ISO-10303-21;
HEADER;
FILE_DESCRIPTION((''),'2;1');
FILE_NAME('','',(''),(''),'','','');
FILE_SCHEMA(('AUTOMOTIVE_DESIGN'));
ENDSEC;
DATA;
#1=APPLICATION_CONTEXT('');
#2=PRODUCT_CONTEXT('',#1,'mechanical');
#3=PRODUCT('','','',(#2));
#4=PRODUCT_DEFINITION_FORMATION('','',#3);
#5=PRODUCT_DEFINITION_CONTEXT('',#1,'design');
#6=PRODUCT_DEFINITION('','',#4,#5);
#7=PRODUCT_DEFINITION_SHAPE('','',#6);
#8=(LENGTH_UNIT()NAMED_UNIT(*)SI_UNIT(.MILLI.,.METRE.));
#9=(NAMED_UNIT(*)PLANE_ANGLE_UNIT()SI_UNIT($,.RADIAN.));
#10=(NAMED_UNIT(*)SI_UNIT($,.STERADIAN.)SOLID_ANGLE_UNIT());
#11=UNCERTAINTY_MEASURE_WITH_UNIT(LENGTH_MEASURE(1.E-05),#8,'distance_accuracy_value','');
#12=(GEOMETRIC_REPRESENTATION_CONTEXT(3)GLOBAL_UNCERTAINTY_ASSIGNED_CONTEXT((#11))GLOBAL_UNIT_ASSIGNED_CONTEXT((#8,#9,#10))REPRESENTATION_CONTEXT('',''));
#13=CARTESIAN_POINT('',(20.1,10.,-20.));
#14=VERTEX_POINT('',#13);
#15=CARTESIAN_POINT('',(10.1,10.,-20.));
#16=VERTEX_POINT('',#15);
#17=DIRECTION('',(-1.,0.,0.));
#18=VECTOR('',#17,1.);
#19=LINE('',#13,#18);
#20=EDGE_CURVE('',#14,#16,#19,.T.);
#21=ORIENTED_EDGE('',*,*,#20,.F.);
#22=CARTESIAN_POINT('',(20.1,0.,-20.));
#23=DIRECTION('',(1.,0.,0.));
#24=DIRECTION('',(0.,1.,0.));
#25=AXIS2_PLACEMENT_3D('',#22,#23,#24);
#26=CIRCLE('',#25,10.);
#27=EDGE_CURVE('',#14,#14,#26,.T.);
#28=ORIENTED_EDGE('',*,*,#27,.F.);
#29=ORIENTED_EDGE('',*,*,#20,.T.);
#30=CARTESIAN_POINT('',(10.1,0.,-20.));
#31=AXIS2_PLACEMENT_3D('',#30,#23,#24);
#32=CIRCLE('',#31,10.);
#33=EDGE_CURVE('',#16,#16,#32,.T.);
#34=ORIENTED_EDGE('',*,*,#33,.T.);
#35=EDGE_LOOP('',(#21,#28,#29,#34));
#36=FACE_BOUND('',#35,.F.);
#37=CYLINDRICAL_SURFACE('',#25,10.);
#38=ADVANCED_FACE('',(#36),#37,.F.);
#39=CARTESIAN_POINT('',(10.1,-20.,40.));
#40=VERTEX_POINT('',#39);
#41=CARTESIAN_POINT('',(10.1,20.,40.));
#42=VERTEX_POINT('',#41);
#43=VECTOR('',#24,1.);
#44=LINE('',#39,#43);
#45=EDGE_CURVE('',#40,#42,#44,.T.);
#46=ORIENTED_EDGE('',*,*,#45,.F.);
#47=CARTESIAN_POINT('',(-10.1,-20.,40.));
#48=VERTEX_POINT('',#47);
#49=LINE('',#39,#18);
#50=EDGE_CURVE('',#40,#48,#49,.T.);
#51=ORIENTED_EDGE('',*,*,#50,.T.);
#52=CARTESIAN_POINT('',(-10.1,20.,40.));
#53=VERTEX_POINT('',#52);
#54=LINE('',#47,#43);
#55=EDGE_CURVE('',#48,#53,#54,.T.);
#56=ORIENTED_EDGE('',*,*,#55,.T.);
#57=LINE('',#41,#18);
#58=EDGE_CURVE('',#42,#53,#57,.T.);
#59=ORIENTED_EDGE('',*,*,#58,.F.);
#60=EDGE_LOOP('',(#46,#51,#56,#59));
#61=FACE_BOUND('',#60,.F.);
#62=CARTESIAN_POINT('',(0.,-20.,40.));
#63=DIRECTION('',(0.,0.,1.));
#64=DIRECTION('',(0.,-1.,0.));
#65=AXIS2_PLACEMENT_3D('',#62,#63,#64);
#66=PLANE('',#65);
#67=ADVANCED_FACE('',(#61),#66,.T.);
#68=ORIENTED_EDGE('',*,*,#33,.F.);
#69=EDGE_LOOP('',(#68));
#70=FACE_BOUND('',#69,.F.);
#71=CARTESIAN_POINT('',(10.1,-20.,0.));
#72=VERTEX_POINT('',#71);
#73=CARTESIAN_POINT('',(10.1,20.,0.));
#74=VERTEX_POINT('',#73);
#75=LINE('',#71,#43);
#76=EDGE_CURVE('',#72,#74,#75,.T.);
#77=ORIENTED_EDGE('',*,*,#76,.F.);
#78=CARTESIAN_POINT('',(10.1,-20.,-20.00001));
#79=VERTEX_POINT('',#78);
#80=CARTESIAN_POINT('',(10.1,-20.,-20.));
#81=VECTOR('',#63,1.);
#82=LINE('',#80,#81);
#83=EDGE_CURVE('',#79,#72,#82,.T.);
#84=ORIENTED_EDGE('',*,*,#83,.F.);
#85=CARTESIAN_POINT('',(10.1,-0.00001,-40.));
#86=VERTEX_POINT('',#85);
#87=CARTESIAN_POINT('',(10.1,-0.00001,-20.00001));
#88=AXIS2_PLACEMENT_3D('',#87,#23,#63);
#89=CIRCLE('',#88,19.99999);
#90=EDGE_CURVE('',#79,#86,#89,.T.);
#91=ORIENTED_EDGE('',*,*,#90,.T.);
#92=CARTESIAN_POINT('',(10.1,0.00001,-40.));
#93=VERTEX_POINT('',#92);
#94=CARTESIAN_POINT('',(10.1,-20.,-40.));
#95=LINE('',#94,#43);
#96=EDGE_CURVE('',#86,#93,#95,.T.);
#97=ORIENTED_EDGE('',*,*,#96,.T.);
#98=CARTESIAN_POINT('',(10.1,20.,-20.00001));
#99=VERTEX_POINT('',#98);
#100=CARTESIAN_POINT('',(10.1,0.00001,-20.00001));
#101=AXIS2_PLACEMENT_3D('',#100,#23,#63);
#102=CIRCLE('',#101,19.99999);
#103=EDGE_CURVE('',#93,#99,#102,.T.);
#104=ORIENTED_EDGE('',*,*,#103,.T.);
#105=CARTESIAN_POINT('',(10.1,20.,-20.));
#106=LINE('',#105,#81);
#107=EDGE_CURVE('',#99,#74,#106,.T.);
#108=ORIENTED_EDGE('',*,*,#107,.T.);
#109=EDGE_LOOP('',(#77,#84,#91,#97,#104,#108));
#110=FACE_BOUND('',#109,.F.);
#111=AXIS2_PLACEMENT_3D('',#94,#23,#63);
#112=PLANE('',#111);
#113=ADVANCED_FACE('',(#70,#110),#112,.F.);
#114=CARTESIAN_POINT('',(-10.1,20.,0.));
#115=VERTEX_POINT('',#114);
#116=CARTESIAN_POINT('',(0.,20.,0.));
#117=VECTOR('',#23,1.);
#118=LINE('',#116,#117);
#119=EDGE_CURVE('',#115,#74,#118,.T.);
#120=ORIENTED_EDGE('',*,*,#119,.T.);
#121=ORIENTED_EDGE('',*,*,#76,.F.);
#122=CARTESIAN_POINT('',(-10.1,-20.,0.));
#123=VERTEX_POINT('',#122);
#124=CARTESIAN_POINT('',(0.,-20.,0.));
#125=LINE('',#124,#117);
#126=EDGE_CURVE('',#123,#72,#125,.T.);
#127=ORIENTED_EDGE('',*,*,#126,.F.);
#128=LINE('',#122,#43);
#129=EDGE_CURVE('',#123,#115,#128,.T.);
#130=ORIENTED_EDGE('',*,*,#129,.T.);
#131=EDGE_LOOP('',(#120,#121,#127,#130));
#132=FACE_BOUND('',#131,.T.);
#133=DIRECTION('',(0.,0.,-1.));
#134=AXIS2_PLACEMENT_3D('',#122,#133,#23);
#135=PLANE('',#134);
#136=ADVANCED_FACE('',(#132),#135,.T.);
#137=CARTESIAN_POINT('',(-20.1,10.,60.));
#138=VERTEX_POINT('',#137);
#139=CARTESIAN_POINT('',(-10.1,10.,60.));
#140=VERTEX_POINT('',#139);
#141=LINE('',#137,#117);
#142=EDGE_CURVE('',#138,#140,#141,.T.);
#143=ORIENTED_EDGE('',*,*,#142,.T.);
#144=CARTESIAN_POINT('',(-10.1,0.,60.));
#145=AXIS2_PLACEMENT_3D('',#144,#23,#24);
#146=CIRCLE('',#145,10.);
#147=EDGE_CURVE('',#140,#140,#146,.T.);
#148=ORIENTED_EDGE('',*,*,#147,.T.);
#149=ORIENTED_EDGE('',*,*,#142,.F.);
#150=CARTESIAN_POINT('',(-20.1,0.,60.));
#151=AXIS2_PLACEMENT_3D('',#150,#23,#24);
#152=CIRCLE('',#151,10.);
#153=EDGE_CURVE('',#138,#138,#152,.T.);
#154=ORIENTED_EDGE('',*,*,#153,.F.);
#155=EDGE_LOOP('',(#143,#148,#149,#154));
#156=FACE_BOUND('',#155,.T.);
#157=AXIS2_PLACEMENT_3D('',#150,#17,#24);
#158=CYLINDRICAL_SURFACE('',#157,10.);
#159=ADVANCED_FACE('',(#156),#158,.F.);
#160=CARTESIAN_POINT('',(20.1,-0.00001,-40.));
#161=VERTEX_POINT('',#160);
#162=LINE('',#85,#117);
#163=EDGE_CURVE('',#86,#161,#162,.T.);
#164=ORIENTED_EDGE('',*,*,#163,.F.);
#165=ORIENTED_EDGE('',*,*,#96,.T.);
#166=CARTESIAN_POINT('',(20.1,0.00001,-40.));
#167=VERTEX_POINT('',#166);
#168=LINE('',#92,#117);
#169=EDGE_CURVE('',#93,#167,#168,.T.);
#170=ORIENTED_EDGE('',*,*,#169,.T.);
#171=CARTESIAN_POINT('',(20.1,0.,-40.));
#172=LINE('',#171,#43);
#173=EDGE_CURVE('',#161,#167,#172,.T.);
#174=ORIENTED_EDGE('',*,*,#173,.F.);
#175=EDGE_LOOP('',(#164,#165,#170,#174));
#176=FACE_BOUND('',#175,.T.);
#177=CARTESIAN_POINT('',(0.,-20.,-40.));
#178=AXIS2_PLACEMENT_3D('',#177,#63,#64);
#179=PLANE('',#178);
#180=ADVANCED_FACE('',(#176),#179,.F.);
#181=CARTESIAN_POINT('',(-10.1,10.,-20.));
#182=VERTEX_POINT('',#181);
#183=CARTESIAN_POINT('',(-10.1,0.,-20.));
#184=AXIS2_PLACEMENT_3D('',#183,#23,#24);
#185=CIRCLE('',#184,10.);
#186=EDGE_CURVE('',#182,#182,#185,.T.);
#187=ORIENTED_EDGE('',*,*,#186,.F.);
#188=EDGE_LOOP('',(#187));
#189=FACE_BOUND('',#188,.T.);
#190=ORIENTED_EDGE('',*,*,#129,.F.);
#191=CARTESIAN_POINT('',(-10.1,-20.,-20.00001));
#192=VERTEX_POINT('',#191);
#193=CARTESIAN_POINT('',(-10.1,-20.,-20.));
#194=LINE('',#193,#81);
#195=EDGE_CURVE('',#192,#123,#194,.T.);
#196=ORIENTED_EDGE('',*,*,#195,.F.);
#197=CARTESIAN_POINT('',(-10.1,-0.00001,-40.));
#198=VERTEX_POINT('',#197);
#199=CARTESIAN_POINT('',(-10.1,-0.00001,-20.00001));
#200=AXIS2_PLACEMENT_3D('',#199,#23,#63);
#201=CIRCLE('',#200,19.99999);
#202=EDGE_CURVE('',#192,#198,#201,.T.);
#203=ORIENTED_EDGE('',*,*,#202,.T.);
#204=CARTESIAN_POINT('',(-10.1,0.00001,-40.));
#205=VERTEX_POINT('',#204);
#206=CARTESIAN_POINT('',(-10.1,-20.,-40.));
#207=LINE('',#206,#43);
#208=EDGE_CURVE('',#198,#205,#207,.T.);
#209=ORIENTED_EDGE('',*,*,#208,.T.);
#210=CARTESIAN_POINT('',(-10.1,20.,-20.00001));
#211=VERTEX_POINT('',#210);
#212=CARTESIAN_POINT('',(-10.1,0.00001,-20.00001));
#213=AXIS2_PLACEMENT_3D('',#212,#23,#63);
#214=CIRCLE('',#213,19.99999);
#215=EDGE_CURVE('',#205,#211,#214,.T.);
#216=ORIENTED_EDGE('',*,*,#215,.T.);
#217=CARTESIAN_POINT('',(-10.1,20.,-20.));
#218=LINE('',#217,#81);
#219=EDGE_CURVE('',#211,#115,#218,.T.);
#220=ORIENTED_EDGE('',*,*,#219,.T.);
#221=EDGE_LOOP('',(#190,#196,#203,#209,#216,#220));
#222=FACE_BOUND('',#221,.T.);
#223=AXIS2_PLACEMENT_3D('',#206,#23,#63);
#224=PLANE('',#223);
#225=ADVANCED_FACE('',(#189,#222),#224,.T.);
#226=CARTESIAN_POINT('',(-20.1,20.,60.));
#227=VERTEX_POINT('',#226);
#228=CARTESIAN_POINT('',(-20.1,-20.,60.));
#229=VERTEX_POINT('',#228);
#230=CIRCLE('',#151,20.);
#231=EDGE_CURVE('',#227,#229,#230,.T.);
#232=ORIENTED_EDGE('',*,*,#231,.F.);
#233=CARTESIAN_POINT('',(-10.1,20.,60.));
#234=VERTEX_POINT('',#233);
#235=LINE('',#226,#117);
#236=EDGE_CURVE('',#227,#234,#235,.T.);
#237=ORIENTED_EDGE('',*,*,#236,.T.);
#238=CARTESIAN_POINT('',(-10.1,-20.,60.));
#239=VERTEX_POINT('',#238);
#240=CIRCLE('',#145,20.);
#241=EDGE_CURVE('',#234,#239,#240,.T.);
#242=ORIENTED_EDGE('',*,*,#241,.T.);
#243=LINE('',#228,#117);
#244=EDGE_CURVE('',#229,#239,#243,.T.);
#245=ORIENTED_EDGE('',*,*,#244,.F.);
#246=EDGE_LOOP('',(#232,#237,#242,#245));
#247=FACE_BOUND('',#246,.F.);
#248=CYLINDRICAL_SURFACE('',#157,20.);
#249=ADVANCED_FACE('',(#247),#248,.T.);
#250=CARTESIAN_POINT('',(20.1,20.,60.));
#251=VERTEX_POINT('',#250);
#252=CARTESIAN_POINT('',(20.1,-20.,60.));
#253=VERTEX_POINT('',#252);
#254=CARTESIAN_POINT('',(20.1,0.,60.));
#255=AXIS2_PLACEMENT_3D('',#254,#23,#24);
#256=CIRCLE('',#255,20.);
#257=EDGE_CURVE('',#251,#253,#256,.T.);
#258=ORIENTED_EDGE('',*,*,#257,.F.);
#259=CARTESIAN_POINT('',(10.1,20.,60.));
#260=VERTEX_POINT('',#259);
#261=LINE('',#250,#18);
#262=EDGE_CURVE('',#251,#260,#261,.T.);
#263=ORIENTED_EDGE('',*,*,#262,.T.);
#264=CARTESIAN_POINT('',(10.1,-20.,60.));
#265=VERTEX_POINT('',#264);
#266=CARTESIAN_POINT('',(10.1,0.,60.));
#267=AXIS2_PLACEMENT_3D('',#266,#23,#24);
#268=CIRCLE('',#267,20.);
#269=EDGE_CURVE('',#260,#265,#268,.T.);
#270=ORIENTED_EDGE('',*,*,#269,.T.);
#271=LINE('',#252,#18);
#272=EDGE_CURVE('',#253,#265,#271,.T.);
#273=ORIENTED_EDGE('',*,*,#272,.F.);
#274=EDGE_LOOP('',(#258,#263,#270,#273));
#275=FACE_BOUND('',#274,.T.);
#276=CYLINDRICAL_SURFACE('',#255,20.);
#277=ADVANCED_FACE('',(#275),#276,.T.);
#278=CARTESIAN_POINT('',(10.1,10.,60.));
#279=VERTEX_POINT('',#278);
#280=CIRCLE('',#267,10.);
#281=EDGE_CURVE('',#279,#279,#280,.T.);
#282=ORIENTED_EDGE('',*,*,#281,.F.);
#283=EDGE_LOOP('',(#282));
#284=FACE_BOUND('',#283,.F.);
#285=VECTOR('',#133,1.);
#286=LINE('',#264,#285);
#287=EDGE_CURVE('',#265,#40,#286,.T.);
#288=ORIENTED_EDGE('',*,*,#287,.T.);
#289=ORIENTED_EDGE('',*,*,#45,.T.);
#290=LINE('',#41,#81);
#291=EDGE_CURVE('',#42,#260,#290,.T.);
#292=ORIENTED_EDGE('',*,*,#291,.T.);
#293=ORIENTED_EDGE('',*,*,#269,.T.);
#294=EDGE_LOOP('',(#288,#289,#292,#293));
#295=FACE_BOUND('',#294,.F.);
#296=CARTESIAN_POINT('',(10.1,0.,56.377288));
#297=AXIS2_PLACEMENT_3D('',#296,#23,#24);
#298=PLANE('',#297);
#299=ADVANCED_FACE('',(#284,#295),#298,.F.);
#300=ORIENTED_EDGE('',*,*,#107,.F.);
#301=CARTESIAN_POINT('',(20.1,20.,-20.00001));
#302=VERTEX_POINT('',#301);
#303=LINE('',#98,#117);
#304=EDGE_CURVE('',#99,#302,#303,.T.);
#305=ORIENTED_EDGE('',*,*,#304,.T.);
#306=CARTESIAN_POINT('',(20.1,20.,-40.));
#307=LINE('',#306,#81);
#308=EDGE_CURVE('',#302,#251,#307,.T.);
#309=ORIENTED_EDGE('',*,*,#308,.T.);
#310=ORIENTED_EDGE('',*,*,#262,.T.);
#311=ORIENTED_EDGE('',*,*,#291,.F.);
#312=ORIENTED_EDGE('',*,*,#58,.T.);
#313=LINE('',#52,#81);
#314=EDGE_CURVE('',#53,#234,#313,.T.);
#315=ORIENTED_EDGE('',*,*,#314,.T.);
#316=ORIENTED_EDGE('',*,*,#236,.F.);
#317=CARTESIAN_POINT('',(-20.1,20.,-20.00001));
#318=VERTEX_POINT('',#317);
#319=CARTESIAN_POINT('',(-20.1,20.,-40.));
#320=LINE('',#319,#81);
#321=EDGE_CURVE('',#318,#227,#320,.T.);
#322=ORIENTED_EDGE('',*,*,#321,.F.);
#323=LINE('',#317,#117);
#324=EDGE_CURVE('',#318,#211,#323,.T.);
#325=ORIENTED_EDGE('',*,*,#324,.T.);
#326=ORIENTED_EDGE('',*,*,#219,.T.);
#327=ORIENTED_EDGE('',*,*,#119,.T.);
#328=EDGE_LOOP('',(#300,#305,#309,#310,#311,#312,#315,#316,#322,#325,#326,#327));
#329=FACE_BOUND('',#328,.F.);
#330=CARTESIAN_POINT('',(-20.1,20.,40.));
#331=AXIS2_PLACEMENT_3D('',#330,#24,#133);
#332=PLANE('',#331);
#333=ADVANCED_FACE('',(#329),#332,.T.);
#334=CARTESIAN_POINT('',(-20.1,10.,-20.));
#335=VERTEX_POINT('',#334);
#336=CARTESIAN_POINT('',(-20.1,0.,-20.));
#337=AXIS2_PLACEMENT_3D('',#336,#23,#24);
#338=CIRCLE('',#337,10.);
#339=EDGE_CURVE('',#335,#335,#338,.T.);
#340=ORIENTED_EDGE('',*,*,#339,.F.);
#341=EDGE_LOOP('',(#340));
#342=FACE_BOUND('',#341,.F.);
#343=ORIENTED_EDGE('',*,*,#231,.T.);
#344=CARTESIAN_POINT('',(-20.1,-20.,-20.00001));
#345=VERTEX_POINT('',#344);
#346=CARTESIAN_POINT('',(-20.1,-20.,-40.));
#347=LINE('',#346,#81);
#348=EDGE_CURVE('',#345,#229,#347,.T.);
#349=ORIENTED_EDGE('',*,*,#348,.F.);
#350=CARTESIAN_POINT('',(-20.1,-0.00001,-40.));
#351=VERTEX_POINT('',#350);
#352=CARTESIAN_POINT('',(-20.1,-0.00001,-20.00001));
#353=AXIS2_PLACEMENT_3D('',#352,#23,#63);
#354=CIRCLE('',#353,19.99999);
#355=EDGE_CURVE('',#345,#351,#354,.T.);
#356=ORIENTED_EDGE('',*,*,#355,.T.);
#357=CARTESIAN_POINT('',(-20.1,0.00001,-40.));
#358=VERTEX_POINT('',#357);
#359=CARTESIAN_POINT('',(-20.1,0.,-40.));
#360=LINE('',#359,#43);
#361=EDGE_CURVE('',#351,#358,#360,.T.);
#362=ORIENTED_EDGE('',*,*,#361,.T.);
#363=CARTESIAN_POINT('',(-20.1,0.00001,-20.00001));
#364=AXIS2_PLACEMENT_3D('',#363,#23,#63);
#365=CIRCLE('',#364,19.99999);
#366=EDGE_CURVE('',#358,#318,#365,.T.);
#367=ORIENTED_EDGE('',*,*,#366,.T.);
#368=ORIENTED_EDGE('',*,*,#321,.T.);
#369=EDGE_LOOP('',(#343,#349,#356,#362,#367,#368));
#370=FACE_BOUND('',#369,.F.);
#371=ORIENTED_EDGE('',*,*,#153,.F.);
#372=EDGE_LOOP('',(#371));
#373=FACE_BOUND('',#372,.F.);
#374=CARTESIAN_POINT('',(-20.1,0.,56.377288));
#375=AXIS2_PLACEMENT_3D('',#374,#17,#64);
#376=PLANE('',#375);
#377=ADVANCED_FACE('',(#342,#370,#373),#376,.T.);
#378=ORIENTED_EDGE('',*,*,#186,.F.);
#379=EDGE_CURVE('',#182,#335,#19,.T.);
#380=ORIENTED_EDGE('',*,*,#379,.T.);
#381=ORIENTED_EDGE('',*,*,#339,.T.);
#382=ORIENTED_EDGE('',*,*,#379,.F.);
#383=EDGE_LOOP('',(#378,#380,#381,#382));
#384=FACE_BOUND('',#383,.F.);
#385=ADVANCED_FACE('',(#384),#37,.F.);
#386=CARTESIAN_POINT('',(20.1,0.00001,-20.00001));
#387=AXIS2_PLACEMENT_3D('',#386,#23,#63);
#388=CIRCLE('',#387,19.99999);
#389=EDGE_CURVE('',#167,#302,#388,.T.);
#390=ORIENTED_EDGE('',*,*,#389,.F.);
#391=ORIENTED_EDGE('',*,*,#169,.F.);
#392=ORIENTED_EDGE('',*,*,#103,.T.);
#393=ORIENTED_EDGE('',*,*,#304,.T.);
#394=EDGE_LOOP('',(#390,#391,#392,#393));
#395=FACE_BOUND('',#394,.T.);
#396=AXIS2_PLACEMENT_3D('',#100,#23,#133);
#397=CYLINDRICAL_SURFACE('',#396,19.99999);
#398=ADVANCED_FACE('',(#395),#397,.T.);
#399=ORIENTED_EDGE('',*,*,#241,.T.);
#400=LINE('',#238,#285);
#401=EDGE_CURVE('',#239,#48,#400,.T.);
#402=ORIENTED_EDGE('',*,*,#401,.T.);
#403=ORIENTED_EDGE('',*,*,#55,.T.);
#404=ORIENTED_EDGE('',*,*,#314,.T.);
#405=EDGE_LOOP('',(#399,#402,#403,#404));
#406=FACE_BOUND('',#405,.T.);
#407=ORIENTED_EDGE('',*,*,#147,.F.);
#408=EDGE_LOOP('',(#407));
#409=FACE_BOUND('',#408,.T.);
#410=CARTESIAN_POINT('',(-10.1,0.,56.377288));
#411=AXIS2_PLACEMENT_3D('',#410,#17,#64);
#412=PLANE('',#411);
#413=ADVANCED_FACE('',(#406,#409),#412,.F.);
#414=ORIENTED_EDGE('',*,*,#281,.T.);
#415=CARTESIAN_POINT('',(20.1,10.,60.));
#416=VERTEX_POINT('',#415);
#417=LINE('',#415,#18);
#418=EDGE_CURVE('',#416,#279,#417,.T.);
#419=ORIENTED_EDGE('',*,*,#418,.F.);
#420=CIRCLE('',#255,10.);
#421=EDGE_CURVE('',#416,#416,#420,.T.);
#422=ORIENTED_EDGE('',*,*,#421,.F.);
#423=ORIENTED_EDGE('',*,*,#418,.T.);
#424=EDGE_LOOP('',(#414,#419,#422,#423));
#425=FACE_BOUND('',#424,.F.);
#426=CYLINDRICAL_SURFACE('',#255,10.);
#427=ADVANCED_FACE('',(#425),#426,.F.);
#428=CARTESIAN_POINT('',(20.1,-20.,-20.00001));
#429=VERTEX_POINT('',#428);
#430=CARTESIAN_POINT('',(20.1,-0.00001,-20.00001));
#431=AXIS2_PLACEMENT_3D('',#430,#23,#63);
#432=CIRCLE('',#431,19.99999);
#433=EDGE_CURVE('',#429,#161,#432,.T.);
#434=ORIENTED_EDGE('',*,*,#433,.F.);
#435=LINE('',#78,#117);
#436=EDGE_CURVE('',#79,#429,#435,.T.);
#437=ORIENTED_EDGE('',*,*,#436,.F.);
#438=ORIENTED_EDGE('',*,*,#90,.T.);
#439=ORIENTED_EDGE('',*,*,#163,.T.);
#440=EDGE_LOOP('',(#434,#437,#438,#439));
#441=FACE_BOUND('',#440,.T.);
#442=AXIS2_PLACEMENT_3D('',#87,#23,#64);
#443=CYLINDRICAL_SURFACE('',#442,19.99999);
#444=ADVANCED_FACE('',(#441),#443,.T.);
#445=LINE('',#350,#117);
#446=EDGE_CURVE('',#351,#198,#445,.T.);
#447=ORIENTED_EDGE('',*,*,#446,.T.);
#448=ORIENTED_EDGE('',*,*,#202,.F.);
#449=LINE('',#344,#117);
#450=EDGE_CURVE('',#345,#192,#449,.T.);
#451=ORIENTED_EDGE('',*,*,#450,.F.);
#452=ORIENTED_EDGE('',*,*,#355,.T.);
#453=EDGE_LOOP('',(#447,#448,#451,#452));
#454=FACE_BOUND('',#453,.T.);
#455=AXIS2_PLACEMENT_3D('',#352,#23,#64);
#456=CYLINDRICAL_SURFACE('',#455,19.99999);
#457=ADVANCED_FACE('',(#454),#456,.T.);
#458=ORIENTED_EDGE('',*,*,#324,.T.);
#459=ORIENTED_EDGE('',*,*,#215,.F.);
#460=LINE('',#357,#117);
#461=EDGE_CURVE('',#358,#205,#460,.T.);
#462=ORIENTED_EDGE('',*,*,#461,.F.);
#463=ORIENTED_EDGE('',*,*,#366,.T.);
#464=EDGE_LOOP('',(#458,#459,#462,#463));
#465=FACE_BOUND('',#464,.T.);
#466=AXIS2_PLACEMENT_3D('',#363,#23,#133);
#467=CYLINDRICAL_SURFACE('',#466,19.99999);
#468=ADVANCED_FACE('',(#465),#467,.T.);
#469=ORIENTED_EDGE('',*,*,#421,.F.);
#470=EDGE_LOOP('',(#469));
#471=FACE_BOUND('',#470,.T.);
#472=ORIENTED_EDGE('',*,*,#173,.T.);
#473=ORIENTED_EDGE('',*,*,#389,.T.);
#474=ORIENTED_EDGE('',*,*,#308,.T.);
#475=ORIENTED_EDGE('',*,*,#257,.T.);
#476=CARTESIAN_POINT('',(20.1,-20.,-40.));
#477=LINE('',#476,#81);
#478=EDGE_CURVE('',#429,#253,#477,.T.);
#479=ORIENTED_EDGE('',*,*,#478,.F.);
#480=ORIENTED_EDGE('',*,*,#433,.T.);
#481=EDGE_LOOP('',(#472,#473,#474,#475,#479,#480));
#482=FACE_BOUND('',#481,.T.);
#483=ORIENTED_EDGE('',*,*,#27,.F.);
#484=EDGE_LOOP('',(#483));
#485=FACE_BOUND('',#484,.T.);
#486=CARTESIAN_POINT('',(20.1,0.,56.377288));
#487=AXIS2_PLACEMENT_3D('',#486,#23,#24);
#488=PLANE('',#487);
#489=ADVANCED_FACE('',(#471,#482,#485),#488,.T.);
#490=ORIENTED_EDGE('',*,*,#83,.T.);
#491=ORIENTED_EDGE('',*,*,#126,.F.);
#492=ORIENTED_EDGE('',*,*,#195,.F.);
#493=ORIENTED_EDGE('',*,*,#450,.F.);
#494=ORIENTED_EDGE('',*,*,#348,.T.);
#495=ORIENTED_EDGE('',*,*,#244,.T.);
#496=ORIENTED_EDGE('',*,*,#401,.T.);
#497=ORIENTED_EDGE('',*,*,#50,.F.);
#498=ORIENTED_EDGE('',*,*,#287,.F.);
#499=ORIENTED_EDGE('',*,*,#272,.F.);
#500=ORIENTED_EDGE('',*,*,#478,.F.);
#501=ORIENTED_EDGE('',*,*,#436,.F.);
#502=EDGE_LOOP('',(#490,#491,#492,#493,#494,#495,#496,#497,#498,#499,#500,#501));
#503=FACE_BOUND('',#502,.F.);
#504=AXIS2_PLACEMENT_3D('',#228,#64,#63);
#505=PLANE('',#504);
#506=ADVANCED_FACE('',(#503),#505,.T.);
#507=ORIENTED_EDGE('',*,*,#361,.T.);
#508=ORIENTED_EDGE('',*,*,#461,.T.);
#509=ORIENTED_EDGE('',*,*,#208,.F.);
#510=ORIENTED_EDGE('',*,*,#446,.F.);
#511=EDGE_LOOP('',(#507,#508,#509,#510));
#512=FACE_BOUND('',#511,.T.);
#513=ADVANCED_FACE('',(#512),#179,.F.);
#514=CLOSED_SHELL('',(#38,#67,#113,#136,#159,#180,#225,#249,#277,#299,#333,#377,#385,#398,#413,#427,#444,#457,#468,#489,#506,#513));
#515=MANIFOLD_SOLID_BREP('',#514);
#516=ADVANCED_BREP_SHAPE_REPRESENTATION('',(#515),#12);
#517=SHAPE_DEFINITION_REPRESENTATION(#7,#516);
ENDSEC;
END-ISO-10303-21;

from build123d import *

# Parameters (mm, degrees)
F0_W     = 40
F0_H     = 80
F1_DEPTH = 20.1
F3_R     = 10
F4_DEPTH = 10
F6_W     = 20.2
F6_H     = 40
F7_DEPTH = 40
F8_R     = 10
F9_DEPTH = 40.2
F10_R    = 19.99999


# Not quite as in the source:
# - a fillet or chamfer is up to 0.001 mm smaller than in the source, because OpenCascade refuses the exact size


with BuildPart() as f1:
    # F0 (on Right) → F1 (new body)
    with BuildSketch(Plane.YZ):
        Rectangle(F0_W, F0_H)
    extrude(amount=F1_DEPTH)

    # F3 (on face) → F4 (join)
    with BuildSketch(Plane.YZ.offset(20.1)):
        with BuildLine():
            Line((-20, 60), (-20, 40))
            Line((-20, 40), (20, 40))
            Line((20, 40), (20, 60))
            ThreePointArc((20, 60), (0, 80), (-20, 60))
        make_face()
        with Locations((0, 60)):
            Circle(F3_R, mode=Mode.SUBTRACT)
    extrude(amount=-F4_DEPTH)

    # F5: F1 across plane


with BuildPart() as f1_1:
    add(f1.part)
    add(f1.part.mirror(Plane.YZ))

    # F6 (on face) → F7 (cut, through all)
    with BuildSketch(Plane.XZ.offset(20)):
        with Locations((0, -20)):
            Rectangle(F6_W, F6_H)
    extrude(amount=-F7_DEPTH, mode=Mode.SUBTRACT)

    # F8 (on face) → F9 (cut, through all)
    with BuildSketch(Plane.YZ.offset(20.1)):
        with Locations((0, -20)):
            Circle(F8_R)
    extrude(amount=-F9_DEPTH, mode=Mode.SUBTRACT)

    # F10 (radius 20 in the source; OpenCascade refuses exactly that, so slightly less here)
    f10_edges = [f1_1.edges().sort_by_distance(p)[0] for p in [
        (15.1, -20, -40),
        (-15.1, -20, -40),
        (-15.1, 20, -40),
        (15.1, 20, -40),
    ]]
    fillet(f10_edges, radius=F10_R)


solid = f1_1.part
